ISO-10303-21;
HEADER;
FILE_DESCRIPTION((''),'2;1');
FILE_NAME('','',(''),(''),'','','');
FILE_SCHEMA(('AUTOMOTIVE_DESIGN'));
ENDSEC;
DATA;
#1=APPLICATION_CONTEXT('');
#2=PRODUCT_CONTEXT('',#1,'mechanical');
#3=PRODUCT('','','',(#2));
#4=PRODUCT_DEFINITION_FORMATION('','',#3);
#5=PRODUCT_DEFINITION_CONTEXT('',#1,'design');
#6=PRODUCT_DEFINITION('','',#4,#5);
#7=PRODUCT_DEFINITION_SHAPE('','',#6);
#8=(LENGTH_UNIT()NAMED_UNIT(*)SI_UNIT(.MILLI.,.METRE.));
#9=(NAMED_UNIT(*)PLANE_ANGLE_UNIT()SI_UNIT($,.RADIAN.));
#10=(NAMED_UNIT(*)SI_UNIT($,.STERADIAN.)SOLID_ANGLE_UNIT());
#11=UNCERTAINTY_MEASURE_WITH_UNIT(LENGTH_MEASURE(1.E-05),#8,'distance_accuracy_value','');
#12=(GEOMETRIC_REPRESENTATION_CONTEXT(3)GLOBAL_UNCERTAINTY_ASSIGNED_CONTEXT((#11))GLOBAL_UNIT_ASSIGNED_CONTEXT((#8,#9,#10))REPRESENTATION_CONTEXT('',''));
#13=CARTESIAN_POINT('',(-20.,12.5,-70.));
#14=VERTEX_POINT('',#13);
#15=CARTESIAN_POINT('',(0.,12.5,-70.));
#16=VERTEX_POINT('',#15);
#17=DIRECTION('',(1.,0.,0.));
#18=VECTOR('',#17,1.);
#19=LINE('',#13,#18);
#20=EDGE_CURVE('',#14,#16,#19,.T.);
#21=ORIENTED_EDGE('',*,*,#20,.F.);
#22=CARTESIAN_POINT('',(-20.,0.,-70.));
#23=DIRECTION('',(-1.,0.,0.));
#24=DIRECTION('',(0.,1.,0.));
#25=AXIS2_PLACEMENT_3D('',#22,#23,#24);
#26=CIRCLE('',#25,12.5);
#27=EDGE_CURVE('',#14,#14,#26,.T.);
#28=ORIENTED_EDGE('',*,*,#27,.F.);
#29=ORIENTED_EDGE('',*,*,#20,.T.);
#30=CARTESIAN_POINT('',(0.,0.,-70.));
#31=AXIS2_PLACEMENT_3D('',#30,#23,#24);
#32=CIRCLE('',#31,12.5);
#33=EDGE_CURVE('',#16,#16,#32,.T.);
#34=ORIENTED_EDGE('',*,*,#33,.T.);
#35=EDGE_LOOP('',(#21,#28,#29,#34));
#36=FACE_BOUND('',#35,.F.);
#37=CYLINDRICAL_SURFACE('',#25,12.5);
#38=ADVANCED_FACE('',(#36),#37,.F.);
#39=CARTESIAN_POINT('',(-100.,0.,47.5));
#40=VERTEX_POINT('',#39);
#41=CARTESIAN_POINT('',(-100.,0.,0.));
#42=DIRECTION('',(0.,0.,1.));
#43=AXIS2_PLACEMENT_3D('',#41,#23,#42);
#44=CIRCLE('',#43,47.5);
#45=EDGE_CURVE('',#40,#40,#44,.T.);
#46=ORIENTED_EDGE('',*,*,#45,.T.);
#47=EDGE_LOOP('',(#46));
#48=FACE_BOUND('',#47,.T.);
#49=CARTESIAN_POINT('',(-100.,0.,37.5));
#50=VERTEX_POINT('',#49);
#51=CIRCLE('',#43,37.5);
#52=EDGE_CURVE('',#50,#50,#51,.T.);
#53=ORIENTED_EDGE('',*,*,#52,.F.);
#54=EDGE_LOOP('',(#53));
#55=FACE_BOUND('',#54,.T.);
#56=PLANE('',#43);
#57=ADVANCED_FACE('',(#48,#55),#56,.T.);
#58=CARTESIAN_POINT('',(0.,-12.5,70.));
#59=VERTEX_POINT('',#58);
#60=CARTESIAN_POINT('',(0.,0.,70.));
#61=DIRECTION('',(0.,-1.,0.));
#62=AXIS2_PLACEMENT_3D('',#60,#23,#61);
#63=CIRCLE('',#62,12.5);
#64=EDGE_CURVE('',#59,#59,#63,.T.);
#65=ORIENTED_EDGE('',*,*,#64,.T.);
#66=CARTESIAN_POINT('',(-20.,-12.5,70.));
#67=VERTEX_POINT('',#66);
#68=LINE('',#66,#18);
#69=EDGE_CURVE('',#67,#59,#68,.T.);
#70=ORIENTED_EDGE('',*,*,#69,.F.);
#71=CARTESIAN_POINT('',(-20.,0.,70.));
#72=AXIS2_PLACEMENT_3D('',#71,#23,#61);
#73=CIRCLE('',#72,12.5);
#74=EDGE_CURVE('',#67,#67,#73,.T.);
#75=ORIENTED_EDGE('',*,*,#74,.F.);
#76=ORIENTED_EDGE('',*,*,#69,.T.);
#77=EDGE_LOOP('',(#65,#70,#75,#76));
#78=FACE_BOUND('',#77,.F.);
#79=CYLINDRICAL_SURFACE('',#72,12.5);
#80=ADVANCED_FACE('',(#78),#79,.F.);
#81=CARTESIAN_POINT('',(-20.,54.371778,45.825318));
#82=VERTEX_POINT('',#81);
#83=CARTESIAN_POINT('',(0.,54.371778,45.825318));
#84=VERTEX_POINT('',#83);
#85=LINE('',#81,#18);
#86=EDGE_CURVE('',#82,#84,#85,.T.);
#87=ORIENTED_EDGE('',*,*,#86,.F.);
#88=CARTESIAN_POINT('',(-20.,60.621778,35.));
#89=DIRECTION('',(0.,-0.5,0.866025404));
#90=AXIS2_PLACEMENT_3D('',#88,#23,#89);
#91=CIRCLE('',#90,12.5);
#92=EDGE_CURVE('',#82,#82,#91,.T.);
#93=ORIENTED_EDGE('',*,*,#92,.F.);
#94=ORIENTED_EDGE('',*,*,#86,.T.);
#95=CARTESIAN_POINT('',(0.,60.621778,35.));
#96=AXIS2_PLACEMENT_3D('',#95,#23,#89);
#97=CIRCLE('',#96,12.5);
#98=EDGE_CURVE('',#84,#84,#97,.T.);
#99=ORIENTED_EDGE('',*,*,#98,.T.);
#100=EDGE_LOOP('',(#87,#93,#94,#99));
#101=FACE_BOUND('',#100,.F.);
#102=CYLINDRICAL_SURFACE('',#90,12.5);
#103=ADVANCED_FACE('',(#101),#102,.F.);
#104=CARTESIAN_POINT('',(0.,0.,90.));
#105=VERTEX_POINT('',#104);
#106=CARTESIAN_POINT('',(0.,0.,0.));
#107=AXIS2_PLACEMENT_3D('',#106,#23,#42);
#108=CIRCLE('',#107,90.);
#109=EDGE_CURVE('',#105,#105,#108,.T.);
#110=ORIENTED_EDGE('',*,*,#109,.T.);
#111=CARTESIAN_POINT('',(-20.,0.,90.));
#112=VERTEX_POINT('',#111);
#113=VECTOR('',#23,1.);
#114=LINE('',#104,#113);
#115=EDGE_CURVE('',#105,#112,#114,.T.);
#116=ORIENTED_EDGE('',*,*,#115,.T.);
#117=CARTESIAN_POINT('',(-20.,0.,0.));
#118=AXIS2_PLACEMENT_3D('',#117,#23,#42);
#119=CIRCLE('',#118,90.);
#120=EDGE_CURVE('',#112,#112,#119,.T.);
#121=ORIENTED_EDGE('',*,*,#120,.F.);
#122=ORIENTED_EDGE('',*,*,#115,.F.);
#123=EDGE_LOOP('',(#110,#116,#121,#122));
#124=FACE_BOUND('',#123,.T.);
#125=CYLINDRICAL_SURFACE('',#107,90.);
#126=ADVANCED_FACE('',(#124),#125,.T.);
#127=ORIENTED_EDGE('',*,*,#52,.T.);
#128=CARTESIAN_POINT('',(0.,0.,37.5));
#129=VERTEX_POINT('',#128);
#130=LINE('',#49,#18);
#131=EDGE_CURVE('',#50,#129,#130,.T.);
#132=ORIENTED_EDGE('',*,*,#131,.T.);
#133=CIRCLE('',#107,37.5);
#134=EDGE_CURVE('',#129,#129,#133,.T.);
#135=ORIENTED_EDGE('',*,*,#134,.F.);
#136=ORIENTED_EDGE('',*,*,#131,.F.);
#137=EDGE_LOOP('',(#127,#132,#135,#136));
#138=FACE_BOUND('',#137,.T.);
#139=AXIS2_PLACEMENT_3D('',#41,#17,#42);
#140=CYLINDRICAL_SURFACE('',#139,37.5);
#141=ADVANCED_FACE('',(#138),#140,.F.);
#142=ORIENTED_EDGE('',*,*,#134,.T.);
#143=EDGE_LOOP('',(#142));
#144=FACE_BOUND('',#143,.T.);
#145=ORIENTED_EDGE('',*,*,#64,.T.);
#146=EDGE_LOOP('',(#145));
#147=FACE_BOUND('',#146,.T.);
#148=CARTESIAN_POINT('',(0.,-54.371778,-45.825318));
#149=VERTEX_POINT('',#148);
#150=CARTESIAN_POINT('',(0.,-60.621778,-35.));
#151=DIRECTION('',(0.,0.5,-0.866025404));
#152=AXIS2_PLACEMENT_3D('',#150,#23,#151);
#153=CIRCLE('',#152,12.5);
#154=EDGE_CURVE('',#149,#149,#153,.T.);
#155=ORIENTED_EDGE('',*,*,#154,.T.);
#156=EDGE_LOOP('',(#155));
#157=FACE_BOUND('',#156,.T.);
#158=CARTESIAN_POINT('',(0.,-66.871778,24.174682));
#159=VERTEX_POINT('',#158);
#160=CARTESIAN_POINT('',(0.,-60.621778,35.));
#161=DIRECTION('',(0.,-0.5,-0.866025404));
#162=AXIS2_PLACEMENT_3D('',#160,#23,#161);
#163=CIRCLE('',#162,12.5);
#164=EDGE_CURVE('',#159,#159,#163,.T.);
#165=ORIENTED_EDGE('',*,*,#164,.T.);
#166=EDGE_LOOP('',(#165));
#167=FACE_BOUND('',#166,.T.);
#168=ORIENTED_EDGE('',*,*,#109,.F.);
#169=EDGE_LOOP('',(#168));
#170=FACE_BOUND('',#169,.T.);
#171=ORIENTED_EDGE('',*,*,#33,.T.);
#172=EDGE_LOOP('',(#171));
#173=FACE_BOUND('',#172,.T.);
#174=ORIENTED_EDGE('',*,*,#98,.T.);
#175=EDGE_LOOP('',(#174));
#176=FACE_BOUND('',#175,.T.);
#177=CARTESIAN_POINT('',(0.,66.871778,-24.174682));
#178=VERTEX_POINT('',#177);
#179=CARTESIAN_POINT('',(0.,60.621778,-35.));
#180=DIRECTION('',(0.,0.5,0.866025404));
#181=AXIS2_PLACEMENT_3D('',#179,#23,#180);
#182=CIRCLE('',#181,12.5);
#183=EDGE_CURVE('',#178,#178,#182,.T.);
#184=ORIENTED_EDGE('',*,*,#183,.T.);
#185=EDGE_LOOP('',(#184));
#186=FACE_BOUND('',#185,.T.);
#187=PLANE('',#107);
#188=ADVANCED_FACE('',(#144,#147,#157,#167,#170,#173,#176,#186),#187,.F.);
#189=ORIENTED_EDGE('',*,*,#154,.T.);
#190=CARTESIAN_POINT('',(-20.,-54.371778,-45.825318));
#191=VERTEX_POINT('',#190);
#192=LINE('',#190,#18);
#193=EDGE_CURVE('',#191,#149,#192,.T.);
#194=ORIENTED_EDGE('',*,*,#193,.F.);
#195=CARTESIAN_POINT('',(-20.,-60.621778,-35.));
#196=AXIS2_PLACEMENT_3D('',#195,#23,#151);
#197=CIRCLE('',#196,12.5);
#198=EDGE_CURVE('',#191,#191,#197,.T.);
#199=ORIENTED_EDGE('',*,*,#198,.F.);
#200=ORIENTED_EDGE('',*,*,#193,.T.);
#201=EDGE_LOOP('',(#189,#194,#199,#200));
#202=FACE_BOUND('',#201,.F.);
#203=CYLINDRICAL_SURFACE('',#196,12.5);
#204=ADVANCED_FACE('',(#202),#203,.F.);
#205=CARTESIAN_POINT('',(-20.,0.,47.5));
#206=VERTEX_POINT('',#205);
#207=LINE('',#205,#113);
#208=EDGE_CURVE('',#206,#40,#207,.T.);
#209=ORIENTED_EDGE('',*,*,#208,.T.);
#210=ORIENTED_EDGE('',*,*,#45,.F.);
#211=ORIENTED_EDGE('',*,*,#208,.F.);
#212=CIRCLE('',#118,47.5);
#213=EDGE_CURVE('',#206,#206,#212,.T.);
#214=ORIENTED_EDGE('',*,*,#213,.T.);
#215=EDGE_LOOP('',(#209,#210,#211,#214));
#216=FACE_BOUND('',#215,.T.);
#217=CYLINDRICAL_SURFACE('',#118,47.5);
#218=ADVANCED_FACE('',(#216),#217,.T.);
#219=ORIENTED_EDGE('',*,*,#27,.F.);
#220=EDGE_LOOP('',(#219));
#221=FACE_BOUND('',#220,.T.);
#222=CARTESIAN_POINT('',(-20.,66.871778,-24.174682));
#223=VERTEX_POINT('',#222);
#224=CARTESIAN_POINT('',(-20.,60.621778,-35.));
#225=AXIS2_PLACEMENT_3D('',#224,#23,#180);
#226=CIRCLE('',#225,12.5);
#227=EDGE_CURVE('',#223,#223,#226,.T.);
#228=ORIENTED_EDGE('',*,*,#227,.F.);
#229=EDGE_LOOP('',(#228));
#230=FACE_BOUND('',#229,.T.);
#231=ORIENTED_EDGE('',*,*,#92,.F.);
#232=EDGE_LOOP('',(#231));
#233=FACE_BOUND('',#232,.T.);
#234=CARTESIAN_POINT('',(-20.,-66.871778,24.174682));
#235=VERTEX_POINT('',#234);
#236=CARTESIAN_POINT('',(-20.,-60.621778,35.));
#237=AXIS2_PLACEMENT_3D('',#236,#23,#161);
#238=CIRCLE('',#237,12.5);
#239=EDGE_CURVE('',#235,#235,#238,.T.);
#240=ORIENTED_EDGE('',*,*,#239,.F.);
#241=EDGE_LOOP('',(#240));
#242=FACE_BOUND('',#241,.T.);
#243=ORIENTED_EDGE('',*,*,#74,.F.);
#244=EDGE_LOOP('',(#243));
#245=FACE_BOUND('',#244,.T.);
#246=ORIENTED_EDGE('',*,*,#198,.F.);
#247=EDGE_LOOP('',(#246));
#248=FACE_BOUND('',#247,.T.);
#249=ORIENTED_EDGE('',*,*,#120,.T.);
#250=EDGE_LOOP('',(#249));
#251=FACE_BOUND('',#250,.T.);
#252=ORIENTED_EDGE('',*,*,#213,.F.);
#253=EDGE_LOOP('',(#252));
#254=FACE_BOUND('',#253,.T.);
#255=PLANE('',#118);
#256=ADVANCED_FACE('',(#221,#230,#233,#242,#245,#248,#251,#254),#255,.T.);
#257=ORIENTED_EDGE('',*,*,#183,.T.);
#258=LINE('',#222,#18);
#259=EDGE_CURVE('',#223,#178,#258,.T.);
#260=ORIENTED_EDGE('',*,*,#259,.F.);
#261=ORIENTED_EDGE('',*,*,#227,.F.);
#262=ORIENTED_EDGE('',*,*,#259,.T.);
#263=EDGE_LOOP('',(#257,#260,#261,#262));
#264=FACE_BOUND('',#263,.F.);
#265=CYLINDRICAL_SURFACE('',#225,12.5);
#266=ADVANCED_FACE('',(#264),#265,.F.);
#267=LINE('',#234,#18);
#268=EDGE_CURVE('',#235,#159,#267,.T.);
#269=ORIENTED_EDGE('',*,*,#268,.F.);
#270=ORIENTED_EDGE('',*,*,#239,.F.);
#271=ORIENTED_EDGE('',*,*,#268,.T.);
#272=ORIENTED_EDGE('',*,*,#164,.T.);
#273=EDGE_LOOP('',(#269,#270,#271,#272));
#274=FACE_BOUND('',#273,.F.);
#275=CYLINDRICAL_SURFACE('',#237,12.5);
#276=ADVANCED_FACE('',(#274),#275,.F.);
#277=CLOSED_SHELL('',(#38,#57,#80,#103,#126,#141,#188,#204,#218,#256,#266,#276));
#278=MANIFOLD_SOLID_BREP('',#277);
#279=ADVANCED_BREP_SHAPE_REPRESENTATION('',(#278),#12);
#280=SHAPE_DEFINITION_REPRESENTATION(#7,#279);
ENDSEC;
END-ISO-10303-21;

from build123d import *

# Parameters (mm, degrees)
F2_R            = 12.5
F3_DEPTH        = 20.001
F3_COPIES_COUNT = 6


# Not quite as in the source:
# - a pattern or mirror of a feature is missing from the dataset's text; its kind, count and spacing are read off the source's solid


with BuildPart() as f1:
    # F0 (on Front) → F1 (revolve)
    with BuildSketch(Plane.XZ):
        Polygon((-100, 37.5), (0, 37.5), (0, 90), (-20, 90), (-20, 47.5), (-100, 47.5), align=None)
    revolve(axis=Axis((-107.4553492388, 0, 0), (-1, 0, 0)))

    # F2 (on face) → F3 (cut, through all)
    with BuildSketch(Plane(origin=(-20, 0, 0), x_dir=(0, -1, 0), z_dir=(-1, 0, 0))):
        with Locations((0, 70)):
            Circle(F2_R)
    f3 = extrude(amount=-F3_DEPTH, mode=Mode.SUBTRACT)

    # F3_copies: F3 ×6 about axis
    f3_copies_axis = Axis((0, 0, 0), (1, 0, 0))
    for i in range(1, F3_COPIES_COUNT):
        add(f3.rotate(f3_copies_axis, i * 360 / F3_COPIES_COUNT), mode=Mode.SUBTRACT)


solid = f1.part
